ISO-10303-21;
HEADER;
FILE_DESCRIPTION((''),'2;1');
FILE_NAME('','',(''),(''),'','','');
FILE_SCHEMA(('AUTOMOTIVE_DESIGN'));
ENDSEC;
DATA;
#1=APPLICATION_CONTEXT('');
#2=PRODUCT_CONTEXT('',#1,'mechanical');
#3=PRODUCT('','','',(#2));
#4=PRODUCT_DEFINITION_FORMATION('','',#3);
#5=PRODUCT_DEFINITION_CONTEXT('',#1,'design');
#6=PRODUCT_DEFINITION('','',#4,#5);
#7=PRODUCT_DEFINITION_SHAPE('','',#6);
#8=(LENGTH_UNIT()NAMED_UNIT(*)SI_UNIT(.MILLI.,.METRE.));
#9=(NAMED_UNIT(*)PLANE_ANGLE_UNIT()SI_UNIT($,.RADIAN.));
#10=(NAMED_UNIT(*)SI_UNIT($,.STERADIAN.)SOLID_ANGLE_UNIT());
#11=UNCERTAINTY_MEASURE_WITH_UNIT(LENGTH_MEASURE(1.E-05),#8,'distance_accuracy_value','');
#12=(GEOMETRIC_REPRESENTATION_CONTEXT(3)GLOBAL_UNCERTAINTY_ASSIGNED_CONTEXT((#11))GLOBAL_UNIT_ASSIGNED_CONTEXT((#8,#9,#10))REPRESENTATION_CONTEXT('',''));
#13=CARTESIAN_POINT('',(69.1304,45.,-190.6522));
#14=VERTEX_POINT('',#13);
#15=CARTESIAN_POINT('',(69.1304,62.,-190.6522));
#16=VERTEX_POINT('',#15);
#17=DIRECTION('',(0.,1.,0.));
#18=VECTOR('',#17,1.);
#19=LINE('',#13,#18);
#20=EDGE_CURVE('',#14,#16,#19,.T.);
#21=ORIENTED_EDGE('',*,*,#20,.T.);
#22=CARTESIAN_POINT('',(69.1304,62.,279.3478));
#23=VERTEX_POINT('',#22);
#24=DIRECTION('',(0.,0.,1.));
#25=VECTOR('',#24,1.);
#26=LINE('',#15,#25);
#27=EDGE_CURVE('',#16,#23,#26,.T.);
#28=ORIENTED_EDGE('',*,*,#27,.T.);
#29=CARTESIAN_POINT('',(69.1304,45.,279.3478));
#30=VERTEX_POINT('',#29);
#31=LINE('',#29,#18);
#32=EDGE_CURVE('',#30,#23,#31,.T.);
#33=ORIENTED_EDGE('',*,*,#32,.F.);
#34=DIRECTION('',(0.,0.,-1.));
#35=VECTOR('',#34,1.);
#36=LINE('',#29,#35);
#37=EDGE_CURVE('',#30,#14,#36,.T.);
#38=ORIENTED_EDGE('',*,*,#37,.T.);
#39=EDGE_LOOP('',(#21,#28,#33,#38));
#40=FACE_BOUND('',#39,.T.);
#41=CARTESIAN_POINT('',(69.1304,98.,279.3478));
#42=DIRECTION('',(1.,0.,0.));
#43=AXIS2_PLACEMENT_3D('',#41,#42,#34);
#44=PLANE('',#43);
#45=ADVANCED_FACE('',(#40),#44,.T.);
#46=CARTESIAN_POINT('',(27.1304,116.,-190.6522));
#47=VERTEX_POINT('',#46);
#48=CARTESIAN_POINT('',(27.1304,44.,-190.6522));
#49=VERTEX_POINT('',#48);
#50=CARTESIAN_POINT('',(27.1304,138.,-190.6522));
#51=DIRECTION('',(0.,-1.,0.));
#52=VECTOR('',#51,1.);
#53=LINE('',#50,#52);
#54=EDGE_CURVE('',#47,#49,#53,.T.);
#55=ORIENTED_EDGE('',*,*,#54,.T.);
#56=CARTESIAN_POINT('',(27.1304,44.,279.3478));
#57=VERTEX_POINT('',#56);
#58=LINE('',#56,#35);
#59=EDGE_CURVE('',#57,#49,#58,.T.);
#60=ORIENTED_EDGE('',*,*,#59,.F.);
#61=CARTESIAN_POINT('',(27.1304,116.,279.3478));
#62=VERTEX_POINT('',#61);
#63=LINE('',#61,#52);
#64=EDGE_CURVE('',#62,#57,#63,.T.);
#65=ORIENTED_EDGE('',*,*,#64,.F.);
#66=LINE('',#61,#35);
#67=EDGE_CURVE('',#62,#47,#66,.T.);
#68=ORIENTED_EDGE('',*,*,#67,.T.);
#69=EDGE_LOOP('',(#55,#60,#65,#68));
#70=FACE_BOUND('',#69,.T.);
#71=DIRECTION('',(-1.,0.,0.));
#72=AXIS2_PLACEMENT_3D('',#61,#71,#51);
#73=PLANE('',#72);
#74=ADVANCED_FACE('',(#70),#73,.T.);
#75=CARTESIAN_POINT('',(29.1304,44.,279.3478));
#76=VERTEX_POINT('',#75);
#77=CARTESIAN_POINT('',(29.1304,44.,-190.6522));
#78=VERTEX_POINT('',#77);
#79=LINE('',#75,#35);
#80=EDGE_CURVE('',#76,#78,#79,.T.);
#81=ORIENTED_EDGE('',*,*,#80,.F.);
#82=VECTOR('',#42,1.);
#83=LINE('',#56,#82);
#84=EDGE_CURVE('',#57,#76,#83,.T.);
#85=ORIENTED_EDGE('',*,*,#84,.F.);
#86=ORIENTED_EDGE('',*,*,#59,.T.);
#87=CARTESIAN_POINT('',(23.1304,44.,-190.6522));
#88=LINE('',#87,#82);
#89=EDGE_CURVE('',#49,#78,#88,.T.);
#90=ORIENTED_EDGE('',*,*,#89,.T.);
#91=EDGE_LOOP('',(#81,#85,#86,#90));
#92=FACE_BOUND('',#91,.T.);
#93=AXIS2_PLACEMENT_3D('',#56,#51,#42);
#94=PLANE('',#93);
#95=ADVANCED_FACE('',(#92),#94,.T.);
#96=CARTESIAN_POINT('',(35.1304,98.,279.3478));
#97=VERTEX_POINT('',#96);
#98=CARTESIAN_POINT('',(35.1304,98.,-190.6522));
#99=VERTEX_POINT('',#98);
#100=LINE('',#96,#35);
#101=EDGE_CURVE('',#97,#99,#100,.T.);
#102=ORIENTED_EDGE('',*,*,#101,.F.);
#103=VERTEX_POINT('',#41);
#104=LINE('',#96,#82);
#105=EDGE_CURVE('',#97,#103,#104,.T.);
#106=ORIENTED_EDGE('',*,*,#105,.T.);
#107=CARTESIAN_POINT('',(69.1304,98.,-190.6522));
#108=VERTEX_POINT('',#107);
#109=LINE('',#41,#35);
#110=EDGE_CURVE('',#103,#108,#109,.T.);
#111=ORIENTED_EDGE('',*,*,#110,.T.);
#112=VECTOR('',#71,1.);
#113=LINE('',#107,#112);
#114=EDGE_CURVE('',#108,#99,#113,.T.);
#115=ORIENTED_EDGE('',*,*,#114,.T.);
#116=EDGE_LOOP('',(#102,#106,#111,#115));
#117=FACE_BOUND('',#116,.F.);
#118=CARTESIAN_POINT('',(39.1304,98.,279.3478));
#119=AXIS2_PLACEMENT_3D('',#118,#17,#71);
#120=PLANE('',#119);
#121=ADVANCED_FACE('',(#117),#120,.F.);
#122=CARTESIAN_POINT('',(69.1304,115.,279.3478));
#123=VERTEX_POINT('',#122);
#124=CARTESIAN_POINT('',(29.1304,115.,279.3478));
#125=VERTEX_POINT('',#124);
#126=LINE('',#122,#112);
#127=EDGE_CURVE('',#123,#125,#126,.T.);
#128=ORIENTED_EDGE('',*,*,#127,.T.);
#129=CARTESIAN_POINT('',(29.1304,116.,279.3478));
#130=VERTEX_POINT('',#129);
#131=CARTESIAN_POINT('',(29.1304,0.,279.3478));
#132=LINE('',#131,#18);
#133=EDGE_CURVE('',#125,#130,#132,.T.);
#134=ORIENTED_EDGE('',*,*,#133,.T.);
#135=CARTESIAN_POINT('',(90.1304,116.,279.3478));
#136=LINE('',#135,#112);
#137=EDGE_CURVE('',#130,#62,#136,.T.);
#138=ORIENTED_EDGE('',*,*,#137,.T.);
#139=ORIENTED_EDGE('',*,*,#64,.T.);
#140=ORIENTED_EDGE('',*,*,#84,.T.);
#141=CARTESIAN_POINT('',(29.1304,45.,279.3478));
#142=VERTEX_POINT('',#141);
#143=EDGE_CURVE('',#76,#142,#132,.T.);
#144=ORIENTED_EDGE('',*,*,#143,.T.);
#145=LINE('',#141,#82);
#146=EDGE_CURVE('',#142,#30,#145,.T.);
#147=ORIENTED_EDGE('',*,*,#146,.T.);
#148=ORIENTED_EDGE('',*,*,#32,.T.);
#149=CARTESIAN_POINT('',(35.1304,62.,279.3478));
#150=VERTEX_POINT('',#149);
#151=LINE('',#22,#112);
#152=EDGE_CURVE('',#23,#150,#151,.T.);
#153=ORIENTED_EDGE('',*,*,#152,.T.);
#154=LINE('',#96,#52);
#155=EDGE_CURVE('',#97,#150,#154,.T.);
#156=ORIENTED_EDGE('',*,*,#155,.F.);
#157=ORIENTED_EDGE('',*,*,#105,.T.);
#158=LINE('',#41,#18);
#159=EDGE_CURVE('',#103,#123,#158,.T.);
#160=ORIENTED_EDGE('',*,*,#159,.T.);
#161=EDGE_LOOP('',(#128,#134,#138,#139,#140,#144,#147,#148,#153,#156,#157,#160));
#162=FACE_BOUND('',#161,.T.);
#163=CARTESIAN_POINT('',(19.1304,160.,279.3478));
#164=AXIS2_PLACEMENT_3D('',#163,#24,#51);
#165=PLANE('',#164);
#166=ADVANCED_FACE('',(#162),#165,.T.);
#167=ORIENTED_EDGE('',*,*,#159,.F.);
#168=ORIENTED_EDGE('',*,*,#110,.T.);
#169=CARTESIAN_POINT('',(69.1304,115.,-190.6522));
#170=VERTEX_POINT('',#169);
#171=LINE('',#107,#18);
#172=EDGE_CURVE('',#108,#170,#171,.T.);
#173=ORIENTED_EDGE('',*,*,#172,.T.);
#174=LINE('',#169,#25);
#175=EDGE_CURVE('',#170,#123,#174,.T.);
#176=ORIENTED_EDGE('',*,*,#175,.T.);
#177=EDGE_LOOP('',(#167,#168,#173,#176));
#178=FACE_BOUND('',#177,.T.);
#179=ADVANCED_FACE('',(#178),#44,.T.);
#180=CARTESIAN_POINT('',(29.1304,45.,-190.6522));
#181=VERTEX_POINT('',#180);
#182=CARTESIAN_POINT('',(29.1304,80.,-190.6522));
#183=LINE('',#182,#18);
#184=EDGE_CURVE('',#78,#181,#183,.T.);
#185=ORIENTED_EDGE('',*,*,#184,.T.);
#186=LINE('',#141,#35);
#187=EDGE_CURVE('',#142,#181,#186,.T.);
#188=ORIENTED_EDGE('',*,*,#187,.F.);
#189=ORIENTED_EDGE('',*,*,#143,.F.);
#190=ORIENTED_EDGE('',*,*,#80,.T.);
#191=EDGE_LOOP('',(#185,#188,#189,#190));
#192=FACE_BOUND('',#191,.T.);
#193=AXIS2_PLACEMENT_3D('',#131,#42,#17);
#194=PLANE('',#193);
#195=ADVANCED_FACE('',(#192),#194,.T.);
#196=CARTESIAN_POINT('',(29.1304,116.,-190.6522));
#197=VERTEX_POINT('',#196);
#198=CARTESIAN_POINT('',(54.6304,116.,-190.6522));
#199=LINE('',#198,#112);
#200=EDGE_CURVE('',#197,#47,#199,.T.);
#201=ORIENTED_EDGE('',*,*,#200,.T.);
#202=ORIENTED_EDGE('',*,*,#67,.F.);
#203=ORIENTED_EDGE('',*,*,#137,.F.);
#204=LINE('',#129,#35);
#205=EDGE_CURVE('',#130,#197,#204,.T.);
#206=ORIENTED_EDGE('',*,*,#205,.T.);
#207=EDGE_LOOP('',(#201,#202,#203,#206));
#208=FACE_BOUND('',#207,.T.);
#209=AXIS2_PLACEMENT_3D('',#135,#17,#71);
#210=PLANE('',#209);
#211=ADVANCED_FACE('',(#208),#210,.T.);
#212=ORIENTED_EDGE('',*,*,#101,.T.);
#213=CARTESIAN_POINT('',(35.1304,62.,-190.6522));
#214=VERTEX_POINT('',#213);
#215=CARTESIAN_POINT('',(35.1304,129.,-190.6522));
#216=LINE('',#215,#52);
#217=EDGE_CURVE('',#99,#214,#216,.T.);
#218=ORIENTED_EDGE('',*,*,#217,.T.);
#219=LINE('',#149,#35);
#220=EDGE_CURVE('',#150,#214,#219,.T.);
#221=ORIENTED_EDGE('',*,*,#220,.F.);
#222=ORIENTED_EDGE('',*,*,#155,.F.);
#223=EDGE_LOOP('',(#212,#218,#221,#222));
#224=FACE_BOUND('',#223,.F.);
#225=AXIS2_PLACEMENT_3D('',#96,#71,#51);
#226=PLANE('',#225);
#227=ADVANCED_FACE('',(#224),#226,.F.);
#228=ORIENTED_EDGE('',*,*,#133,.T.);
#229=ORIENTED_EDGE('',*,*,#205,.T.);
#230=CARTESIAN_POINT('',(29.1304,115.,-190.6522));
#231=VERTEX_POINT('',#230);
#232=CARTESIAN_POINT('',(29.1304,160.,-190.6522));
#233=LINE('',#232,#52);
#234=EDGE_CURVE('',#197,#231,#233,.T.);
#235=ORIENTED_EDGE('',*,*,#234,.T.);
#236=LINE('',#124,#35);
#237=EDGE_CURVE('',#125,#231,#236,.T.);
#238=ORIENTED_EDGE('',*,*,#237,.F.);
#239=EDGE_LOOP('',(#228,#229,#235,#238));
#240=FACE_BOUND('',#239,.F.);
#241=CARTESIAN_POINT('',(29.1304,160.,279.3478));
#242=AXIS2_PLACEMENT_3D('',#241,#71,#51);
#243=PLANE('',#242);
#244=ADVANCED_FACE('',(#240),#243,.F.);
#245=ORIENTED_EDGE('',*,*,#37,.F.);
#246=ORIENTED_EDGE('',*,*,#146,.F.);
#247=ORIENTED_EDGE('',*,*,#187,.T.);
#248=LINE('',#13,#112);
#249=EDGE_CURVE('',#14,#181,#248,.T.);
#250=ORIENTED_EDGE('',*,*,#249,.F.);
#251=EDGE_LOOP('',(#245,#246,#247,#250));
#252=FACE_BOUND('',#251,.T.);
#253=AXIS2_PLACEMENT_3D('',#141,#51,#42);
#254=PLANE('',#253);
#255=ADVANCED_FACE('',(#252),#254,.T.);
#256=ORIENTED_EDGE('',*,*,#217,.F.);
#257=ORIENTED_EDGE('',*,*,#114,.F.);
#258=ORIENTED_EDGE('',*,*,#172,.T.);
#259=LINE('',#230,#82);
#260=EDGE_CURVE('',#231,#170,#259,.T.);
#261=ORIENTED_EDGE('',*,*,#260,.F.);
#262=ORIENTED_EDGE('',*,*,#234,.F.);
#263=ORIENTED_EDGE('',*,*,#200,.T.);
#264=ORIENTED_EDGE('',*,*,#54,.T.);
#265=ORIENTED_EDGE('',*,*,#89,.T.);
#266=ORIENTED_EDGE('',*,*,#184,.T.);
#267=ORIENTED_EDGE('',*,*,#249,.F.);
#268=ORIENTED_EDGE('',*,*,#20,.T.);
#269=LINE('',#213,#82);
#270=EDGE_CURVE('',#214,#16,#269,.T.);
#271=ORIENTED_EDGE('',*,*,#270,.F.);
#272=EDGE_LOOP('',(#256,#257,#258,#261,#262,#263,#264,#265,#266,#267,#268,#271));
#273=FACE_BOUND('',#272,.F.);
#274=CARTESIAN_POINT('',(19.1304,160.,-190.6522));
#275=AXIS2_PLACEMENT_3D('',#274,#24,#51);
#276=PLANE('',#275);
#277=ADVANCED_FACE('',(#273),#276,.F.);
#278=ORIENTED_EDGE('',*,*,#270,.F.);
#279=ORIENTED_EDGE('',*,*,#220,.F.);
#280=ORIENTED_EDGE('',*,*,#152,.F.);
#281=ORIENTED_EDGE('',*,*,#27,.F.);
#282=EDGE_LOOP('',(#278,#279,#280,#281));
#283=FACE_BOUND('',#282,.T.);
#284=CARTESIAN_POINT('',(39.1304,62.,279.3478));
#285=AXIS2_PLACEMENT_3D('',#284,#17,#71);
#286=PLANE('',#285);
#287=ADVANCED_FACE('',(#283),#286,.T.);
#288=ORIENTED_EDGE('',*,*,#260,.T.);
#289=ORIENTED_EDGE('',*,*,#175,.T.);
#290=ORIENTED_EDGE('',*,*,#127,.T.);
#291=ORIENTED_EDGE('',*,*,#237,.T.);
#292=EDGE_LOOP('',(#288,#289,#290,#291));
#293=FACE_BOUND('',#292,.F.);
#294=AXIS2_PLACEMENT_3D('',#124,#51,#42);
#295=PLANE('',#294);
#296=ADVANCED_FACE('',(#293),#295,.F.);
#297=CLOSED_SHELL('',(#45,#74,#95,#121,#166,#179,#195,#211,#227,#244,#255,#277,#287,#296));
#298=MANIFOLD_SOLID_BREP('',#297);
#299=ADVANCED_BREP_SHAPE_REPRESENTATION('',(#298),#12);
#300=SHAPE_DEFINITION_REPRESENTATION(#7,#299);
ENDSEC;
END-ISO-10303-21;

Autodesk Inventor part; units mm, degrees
ref_plane "YZ Plane" through (0, 0, 0) normal (1, 0, 0) x (0, 1, 0)
ref_plane "XZ Plane" through (0, 0, 0) normal (0, 1, 0) x (-1, 0, 0)
ref_plane "XY Plane" through (0, 0, 0) normal (0, 0, 1) x (1, 0, 0)
sketch "Sketch1" plane through (0, 0, 0) normal (0, 1, 0) x (-1, 0, 0)
  line L0 (0, 279.3478) -> (-39.1304, 279.3478)
  line L1 (-39.1304, 279.3478) -> (-39.1304, -195.6522)
  line L2 (-39.1304, -195.6522) -> (0, -195.6522)
  line L3 (0, -195.6522) -> (0, 279.3478)
  line L4 (-39.1304, 279.3478) -> (-29.1304, 279.3478)
  line L5 (-29.1304, 254.3478) -> (-39.1304, 254.3478)
  line L6 (-39.1304, 254.3478) -> (-39.1304, 279.3478)
  line L7 (-39.1304, -195.6522) -> (-29.1304, -195.6522)
  line L8 (-29.1304, -170.6522) -> (-39.1304, -170.6522)
  line L9 (-39.1304, -170.6522) -> (-39.1304, -195.6522)
  point P0 (0, 0)
  point P1 (-39.1304, 254.3478)
  dimension "d0" = 475
  dimension "d4" = 25
  dimension "d5" = 25
extrude "Extrusion1" add sketch "Sketch1" along normal blind 160
sketch "Sketch2" plane through (0, 0, 279.3478) normal (0, 0, 1) x (1, 0, 0)
  line L0 (0, 160) -> (39.1304, 160) projected
  line L1 (0, 160) -> (39.1304, 160)
  line L2 (39.1304, 160) -> (39.1304, 0)
  line L3 (39.1304, 0) -> (0, 0)
  line L4 (0, 0) -> (0, 160)
  line L5 (39.1304, 160) -> (29.1304, 160)
  line L6 (29.1304, 160) -> (29.1304, 115)
  line L7 (29.1304, 115) -> (39.1304, 115)
  line L8 (39.1304, 115) -> (39.1304, 160)
  line L9 (39.1304, 0) -> (29.1304, 0)
  line L10 (29.1304, 0) -> (29.1304, 45)
  line L11 (29.1304, 45) -> (39.1304, 45)
  line L12 (39.1304, 45) -> (39.1304, 0)
  circle A0 centre (39.1304, 80) radius 18
  line L13 (35.1304, 75) -> (39.1304, 75)
  line L14 (39.1304, 75) -> (39.1304, 98)
  line L15 (39.1304, 98) -> (35.1304, 98)
  line L16 (35.1304, 98) -> (35.1304, 75)
  line L17 (35.1304, 75) -> (39.1304, 75)
  line L18 (39.1304, 75) -> (39.1304, 62)
  line L19 (39.1304, 62) -> (35.1304, 62)
  line L20 (35.1304, 62) -> (35.1304, 75)
  line L21 (39.1304, 0) -> (39.1304, 160) projected
  line L22 (0, 160) -> (19.1304, 160)
  line L23 (19.1304, 160) -> (19.1304, 0)
  line L24 (19.1304, 0) -> (0, 0)
  line L25 (0, 0) -> (0, 160)
  point P0 (0, 0)
  point P1 (34.1304, 115)
  point P2 (34.1304, 160)
  point P3 (39.1304, 45)
  point P4 (39.1304, 115)
  dimension "d6" = 10
  dimension "d7" = 45
  dimension "d8" = 45
  dimension "d9" = 4
  dimension "d10" = 36
  dimension "d11" = 80
  dimension "d12" = 80
  dimension "d15" = 20
extrude "Extrusion2" cut sketch "Sketch2" against normal up to surface (475 mm away) contours L0 L23 L3 L4 | L0 L2 L7 L6 | L10 L11 L2 L3 | L2 L13 L16 A0 | A0 L16 L15 | L2 A0 L20 L13 | L19 L20 A0
sketch "Sketch3" plane through (0, 160, 0) normal (0, 1, 0) x (1, 0, 0)
  line L0 (-18, 349) -> (160, 349)
  line L1 (160, 349) -> (160, 190.6522)
  line L2 (160, 190.6522) -> (-18, 190.6522)
  line L3 (-18, 190.6522) -> (-18, 349)
  line L4 (19.1304, -279.3478) -> (29.1304, -279.3478) projected
  point P0 (0, 0)
  dimension "d16" = 470
extrude "Extrusion3" cut sketch "Sketch3" against normal blind 200
sketch "Sketch4" plane through (39.1304, 98, 279.3478) normal (1, 0, 0) x (0, 0, -1)
  line L0 (470, 0) -> (470, 17) projected
  line L1 (470, 17) -> (0, 17) projected
  line L2 (0, 0) -> (0, 17) projected
  line L3 (0, 0) -> (470, 0) projected
  line L4 (470, -53) -> (470, -36) projected
  line L5 (470, -36) -> (0, -36) projected
  line L6 (0, -53) -> (0, -36) projected
  line L7 (0, -53) -> (470, -53) projected
  point P0 (279.3478, -98)
extrude "Extrusion4" add sketch "Sketch4" along normal blind 30
sketch "Sketch5" plane through (19.1304, 0, 279.3478) normal (-1, 0, 0) x (0, 0, 1)
  line L0 (-470, 160) -> (-470, 0) projected
  line L1 (0, 0) -> (-470, 0) projected
  line L2 (0, 160) -> (0, 0) projected
  line L3 (-470, 160) -> (0, 160) projected
  point P0 (-279.3478, 0)
extrude "Extrusion5" add sketch "Sketch5" along normal blind 5
sketch "Sketch6" plane through (29.1304, 115, 279.3478) normal (0, 0, 1) x (1, 0, 0)
  line L0 (9, 13) -> (-3, 13)
  line L1 (-3, 13) -> (-3, 45)
  line L2 (-3, 45) -> (9, 45)
  line L3 (9, 45) -> (9, 13)
  line L4 (-15, -115) -> (0, -115) projected
  line L5 (11, -83) -> (-3, -83)
  line L6 (-3, -83) -> (-3, -115)
  line L7 (-3, -115) -> (11, -115)
  line L8 (11, -115) -> (11, -83)
  line L9 (0, -70) -> (40, -70) projected
  line L10 (0, 0) -> (40, 0) projected
  line L11 (0, 0) -> (0, 45) projected
  point P0 (-29.1304, -115)
  point P1 (0, -115)
  dimension "d23" = 13
  dimension "d24" = 13
  dimension "d25" = 3
extrude "Extrusion6" cut sketch "Sketch6" against normal blind 500
sketch "Sketch7" plane through (35.1304, 62, 279.3478) normal (0, 0, 1) x (1, 0, 0)
  line L0 (55, 54) -> (-8, 54)
  line L1 (-8, 54) -> (-8, -18)
  line L2 (-8, -18) -> (55, -18)
  line L3 (55, -18) -> (55, 54)
  line L4 (-6, 53) -> (34, 53) projected
  line L5 (-6, -17) -> (34, -17) projected
  line L6 (-6, -30) -> (-6, -17) projected
  line L7 (-9, 98) -> (-21, 98) projected
  line L8 (-21, 98) -> (63, 98)
  line L9 (63, 98) -> (63, -62)
  line L10 (63, -62) -> (-21, -62)
  line L11 (-21, -62) -> (-21, 98)
  point P0 (-35.1304, -62)
  point P1 (-9, 98)
  dimension "d28" = 1
  dimension "d29" = 1
  dimension "d30" = 2
extrude "Extrusion7" cut sketch "Sketch7" against normal blind 1000
properties part number "MainRails" material "Aluminum 6061"
